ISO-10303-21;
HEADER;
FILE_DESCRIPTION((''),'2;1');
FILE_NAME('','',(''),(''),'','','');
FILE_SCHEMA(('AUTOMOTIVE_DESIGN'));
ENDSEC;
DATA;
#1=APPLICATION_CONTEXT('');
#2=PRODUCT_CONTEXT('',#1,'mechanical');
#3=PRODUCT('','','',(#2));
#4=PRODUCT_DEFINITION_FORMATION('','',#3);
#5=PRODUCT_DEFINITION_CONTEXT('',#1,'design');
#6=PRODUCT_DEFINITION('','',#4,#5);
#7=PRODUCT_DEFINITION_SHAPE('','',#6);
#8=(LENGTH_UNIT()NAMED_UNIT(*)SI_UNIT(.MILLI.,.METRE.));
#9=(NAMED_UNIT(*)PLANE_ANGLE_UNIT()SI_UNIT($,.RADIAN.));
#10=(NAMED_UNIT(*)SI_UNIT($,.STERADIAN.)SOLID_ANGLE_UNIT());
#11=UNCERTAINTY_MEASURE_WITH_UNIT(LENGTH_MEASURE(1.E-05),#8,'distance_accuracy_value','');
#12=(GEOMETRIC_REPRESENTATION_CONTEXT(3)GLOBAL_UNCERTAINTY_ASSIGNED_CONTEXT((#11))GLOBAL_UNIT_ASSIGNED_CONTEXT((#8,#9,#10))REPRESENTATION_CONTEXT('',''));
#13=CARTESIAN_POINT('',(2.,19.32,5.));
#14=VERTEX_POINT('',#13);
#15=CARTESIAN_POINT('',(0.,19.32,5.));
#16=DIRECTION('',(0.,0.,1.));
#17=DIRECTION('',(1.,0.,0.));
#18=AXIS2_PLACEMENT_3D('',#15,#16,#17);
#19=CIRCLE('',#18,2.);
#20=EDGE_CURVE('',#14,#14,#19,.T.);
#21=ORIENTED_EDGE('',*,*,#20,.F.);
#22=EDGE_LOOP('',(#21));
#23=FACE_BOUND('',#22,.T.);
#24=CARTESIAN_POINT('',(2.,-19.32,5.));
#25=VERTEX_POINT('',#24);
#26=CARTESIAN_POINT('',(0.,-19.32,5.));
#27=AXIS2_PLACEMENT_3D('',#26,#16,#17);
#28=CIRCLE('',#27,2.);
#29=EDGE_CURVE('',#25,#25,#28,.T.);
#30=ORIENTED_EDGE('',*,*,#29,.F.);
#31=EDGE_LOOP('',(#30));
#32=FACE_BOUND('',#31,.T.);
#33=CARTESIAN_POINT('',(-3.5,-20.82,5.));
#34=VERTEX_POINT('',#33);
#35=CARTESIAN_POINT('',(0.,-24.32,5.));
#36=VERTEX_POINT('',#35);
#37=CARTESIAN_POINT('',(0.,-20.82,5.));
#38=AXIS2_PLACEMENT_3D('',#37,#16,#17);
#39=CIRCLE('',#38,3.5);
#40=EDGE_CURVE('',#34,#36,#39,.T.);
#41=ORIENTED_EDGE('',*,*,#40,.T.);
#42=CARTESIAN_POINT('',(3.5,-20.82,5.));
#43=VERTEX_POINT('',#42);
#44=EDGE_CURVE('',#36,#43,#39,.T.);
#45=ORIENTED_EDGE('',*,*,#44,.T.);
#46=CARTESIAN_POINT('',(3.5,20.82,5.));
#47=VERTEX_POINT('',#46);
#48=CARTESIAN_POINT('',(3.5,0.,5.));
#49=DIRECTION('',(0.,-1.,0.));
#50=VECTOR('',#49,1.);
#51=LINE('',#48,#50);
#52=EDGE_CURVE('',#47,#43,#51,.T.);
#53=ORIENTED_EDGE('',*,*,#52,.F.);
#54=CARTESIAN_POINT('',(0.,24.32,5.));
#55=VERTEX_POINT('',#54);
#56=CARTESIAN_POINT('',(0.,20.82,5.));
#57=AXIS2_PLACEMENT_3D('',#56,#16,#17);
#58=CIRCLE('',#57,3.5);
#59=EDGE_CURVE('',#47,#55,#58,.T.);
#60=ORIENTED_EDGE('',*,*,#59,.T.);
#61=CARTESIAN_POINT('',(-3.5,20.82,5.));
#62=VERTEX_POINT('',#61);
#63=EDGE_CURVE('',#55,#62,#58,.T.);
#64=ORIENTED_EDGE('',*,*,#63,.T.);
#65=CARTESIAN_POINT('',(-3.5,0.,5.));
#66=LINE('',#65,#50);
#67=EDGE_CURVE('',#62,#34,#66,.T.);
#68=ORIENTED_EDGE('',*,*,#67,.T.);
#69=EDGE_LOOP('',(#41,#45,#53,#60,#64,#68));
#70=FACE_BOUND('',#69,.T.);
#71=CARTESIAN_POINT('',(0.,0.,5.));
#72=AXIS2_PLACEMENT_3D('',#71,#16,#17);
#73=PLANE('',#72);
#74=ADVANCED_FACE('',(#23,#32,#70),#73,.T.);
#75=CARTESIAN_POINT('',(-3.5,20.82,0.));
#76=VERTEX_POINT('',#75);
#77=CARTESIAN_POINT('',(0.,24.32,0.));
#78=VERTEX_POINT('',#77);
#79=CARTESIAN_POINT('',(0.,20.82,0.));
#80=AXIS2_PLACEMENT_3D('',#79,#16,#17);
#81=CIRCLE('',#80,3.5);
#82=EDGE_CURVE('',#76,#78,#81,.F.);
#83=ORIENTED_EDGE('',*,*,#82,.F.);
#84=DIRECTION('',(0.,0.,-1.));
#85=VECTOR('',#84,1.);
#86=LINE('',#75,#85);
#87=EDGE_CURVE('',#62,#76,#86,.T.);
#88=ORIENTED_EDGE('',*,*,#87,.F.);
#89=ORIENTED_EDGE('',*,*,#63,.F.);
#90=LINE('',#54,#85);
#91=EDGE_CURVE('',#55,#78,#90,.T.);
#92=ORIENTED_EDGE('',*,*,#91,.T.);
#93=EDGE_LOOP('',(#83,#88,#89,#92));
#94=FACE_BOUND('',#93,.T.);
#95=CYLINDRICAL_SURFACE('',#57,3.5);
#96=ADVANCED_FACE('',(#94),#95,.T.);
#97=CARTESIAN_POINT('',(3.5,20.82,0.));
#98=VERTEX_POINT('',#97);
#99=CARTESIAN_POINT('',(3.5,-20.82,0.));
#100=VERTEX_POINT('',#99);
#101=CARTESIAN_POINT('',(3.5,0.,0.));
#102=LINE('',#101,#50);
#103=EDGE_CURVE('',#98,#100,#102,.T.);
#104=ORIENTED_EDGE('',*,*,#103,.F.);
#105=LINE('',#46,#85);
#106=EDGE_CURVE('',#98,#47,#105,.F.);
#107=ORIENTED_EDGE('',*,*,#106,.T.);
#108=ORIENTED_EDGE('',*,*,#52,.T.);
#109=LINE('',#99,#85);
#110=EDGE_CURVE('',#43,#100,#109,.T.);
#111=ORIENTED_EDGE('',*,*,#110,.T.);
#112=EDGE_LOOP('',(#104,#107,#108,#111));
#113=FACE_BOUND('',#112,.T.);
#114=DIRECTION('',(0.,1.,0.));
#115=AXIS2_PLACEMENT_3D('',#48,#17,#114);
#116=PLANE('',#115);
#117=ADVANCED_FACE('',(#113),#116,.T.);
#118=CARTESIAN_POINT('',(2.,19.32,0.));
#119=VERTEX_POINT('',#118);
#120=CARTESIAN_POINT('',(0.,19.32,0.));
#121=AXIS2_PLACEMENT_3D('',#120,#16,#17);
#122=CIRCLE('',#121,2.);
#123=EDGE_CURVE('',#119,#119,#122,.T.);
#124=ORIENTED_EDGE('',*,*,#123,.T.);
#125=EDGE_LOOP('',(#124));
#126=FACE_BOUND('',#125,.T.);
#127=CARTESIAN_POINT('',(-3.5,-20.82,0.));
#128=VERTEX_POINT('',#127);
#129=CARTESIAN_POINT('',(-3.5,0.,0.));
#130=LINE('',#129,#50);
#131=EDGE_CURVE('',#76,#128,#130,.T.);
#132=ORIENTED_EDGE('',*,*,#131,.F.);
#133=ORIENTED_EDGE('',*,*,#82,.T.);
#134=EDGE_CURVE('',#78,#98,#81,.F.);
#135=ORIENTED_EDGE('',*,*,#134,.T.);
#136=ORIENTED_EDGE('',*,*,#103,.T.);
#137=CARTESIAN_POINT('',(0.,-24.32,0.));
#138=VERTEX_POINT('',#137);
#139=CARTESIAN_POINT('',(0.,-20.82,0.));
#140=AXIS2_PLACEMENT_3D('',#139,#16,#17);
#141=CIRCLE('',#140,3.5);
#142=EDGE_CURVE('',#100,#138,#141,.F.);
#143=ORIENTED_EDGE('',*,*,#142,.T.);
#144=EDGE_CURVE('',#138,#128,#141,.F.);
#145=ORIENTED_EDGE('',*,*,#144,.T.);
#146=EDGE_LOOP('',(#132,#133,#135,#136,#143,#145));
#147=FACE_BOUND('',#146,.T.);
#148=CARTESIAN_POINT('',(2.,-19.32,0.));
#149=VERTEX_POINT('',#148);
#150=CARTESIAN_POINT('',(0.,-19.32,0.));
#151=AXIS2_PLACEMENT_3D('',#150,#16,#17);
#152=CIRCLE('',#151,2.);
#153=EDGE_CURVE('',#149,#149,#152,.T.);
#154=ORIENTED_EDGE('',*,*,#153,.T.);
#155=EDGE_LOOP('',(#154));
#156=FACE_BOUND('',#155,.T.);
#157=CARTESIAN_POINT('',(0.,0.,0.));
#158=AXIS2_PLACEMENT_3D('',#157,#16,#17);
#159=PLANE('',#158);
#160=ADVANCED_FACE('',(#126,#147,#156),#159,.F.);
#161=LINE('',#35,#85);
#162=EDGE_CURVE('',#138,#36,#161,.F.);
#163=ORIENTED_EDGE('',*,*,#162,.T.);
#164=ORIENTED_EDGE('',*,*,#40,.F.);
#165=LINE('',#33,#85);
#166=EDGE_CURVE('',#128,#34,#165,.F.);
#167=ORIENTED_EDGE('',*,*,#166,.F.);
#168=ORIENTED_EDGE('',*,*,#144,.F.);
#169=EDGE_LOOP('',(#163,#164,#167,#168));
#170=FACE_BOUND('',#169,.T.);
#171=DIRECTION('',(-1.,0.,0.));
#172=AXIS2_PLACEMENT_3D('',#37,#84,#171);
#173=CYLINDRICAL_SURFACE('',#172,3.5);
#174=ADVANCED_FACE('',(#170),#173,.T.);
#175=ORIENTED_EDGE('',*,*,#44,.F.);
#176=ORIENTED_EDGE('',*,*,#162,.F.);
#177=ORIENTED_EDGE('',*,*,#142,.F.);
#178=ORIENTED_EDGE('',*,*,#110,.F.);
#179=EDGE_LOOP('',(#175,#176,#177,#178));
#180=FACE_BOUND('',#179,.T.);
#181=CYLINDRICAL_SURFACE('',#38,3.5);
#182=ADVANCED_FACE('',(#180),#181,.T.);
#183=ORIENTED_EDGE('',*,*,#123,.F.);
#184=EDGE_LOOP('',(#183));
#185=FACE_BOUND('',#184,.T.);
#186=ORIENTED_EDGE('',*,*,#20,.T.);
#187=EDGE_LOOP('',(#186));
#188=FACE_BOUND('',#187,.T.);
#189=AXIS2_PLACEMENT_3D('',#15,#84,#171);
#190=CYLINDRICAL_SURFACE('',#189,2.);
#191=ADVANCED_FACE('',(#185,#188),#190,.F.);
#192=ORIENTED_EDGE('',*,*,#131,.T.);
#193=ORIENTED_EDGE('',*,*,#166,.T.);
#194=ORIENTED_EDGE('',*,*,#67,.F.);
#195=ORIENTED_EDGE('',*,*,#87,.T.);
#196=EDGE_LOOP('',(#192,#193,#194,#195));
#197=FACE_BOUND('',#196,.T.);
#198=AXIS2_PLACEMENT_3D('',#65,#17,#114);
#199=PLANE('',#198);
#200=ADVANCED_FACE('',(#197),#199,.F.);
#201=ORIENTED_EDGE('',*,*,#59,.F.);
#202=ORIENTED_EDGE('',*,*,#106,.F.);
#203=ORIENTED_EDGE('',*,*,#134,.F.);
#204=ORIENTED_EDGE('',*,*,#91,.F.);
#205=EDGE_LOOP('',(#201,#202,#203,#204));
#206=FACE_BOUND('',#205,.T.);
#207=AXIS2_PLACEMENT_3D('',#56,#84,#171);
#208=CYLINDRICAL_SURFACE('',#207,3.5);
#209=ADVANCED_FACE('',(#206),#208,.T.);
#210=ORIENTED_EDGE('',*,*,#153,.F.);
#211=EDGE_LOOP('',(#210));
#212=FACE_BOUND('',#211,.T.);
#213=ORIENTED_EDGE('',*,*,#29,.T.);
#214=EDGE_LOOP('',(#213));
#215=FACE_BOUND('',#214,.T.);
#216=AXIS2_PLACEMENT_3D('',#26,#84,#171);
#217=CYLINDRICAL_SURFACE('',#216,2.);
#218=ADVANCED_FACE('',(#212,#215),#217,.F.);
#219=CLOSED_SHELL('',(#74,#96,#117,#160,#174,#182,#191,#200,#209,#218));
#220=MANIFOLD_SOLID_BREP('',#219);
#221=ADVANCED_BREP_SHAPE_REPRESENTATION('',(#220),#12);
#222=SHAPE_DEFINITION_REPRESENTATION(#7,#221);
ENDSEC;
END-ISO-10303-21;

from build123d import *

# Parameters (mm, degrees)
BOSS_EXTRUDE1_DEPTH = 5
FILLET1_R           = 3.5


with BuildPart() as part:
    # Sketch1 → Boss-Extrude1 (new body)
    with BuildSketch(Plane.XY):
        with BuildLine():
            Line((0, -21.32), (0, -24.32))
            Line((0, -24.32), (3.5, -24.32))
            Line((3.5, -24.32), (3.5, 24.32))
            Line((3.5, 24.32), (0, 24.32))
            Line((0, 24.32), (0, 21.32))
            ThreePointArc((0, 21.32), (1.414213562, 20.734213562), (2, 19.32))
            ThreePointArc((2, 19.32), (1.414213562, 17.905786438), (0, 17.32))
            Line((0, 17.32), (0, -17.32))
            ThreePointArc((0, -17.32), (1.414213562, -17.905786438), (2, -19.32))
            ThreePointArc((2, -19.32), (1.414213562, -20.734213562), (0, -21.32))
        make_face()
        with BuildLine():
            Line((-3.5, -24.32), (0, -24.32))
            Line((0, -24.32), (0, -21.32))
            ThreePointArc((0, -21.32), (-2, -19.32), (0, -17.32))
            Line((0, -17.32), (0, 17.32))
            ThreePointArc((0, 17.32), (-2, 19.32), (0, 21.32))
            Line((0, 21.32), (0, 24.32))
            Line((0, 24.32), (-3.5, 24.32))
            Line((-3.5, 24.32), (-3.5, -24.32))
        make_face()
    extrude(amount=BOSS_EXTRUDE1_DEPTH)

    # Fillet1
    fillet1_edges = [part.edges().sort_by_distance(p)[0] for p in [
        (-3.5, 24.32, 2.5),
        (3.5, 24.32, 2.5),
        (-3.5, -24.32, 2.5),
        (3.5, -24.32, 2.5),
    ]]
    fillet(fillet1_edges, radius=FILLET1_R - 0.0001)  # a hair under: the kernel refuses the full size


solid = part.part
